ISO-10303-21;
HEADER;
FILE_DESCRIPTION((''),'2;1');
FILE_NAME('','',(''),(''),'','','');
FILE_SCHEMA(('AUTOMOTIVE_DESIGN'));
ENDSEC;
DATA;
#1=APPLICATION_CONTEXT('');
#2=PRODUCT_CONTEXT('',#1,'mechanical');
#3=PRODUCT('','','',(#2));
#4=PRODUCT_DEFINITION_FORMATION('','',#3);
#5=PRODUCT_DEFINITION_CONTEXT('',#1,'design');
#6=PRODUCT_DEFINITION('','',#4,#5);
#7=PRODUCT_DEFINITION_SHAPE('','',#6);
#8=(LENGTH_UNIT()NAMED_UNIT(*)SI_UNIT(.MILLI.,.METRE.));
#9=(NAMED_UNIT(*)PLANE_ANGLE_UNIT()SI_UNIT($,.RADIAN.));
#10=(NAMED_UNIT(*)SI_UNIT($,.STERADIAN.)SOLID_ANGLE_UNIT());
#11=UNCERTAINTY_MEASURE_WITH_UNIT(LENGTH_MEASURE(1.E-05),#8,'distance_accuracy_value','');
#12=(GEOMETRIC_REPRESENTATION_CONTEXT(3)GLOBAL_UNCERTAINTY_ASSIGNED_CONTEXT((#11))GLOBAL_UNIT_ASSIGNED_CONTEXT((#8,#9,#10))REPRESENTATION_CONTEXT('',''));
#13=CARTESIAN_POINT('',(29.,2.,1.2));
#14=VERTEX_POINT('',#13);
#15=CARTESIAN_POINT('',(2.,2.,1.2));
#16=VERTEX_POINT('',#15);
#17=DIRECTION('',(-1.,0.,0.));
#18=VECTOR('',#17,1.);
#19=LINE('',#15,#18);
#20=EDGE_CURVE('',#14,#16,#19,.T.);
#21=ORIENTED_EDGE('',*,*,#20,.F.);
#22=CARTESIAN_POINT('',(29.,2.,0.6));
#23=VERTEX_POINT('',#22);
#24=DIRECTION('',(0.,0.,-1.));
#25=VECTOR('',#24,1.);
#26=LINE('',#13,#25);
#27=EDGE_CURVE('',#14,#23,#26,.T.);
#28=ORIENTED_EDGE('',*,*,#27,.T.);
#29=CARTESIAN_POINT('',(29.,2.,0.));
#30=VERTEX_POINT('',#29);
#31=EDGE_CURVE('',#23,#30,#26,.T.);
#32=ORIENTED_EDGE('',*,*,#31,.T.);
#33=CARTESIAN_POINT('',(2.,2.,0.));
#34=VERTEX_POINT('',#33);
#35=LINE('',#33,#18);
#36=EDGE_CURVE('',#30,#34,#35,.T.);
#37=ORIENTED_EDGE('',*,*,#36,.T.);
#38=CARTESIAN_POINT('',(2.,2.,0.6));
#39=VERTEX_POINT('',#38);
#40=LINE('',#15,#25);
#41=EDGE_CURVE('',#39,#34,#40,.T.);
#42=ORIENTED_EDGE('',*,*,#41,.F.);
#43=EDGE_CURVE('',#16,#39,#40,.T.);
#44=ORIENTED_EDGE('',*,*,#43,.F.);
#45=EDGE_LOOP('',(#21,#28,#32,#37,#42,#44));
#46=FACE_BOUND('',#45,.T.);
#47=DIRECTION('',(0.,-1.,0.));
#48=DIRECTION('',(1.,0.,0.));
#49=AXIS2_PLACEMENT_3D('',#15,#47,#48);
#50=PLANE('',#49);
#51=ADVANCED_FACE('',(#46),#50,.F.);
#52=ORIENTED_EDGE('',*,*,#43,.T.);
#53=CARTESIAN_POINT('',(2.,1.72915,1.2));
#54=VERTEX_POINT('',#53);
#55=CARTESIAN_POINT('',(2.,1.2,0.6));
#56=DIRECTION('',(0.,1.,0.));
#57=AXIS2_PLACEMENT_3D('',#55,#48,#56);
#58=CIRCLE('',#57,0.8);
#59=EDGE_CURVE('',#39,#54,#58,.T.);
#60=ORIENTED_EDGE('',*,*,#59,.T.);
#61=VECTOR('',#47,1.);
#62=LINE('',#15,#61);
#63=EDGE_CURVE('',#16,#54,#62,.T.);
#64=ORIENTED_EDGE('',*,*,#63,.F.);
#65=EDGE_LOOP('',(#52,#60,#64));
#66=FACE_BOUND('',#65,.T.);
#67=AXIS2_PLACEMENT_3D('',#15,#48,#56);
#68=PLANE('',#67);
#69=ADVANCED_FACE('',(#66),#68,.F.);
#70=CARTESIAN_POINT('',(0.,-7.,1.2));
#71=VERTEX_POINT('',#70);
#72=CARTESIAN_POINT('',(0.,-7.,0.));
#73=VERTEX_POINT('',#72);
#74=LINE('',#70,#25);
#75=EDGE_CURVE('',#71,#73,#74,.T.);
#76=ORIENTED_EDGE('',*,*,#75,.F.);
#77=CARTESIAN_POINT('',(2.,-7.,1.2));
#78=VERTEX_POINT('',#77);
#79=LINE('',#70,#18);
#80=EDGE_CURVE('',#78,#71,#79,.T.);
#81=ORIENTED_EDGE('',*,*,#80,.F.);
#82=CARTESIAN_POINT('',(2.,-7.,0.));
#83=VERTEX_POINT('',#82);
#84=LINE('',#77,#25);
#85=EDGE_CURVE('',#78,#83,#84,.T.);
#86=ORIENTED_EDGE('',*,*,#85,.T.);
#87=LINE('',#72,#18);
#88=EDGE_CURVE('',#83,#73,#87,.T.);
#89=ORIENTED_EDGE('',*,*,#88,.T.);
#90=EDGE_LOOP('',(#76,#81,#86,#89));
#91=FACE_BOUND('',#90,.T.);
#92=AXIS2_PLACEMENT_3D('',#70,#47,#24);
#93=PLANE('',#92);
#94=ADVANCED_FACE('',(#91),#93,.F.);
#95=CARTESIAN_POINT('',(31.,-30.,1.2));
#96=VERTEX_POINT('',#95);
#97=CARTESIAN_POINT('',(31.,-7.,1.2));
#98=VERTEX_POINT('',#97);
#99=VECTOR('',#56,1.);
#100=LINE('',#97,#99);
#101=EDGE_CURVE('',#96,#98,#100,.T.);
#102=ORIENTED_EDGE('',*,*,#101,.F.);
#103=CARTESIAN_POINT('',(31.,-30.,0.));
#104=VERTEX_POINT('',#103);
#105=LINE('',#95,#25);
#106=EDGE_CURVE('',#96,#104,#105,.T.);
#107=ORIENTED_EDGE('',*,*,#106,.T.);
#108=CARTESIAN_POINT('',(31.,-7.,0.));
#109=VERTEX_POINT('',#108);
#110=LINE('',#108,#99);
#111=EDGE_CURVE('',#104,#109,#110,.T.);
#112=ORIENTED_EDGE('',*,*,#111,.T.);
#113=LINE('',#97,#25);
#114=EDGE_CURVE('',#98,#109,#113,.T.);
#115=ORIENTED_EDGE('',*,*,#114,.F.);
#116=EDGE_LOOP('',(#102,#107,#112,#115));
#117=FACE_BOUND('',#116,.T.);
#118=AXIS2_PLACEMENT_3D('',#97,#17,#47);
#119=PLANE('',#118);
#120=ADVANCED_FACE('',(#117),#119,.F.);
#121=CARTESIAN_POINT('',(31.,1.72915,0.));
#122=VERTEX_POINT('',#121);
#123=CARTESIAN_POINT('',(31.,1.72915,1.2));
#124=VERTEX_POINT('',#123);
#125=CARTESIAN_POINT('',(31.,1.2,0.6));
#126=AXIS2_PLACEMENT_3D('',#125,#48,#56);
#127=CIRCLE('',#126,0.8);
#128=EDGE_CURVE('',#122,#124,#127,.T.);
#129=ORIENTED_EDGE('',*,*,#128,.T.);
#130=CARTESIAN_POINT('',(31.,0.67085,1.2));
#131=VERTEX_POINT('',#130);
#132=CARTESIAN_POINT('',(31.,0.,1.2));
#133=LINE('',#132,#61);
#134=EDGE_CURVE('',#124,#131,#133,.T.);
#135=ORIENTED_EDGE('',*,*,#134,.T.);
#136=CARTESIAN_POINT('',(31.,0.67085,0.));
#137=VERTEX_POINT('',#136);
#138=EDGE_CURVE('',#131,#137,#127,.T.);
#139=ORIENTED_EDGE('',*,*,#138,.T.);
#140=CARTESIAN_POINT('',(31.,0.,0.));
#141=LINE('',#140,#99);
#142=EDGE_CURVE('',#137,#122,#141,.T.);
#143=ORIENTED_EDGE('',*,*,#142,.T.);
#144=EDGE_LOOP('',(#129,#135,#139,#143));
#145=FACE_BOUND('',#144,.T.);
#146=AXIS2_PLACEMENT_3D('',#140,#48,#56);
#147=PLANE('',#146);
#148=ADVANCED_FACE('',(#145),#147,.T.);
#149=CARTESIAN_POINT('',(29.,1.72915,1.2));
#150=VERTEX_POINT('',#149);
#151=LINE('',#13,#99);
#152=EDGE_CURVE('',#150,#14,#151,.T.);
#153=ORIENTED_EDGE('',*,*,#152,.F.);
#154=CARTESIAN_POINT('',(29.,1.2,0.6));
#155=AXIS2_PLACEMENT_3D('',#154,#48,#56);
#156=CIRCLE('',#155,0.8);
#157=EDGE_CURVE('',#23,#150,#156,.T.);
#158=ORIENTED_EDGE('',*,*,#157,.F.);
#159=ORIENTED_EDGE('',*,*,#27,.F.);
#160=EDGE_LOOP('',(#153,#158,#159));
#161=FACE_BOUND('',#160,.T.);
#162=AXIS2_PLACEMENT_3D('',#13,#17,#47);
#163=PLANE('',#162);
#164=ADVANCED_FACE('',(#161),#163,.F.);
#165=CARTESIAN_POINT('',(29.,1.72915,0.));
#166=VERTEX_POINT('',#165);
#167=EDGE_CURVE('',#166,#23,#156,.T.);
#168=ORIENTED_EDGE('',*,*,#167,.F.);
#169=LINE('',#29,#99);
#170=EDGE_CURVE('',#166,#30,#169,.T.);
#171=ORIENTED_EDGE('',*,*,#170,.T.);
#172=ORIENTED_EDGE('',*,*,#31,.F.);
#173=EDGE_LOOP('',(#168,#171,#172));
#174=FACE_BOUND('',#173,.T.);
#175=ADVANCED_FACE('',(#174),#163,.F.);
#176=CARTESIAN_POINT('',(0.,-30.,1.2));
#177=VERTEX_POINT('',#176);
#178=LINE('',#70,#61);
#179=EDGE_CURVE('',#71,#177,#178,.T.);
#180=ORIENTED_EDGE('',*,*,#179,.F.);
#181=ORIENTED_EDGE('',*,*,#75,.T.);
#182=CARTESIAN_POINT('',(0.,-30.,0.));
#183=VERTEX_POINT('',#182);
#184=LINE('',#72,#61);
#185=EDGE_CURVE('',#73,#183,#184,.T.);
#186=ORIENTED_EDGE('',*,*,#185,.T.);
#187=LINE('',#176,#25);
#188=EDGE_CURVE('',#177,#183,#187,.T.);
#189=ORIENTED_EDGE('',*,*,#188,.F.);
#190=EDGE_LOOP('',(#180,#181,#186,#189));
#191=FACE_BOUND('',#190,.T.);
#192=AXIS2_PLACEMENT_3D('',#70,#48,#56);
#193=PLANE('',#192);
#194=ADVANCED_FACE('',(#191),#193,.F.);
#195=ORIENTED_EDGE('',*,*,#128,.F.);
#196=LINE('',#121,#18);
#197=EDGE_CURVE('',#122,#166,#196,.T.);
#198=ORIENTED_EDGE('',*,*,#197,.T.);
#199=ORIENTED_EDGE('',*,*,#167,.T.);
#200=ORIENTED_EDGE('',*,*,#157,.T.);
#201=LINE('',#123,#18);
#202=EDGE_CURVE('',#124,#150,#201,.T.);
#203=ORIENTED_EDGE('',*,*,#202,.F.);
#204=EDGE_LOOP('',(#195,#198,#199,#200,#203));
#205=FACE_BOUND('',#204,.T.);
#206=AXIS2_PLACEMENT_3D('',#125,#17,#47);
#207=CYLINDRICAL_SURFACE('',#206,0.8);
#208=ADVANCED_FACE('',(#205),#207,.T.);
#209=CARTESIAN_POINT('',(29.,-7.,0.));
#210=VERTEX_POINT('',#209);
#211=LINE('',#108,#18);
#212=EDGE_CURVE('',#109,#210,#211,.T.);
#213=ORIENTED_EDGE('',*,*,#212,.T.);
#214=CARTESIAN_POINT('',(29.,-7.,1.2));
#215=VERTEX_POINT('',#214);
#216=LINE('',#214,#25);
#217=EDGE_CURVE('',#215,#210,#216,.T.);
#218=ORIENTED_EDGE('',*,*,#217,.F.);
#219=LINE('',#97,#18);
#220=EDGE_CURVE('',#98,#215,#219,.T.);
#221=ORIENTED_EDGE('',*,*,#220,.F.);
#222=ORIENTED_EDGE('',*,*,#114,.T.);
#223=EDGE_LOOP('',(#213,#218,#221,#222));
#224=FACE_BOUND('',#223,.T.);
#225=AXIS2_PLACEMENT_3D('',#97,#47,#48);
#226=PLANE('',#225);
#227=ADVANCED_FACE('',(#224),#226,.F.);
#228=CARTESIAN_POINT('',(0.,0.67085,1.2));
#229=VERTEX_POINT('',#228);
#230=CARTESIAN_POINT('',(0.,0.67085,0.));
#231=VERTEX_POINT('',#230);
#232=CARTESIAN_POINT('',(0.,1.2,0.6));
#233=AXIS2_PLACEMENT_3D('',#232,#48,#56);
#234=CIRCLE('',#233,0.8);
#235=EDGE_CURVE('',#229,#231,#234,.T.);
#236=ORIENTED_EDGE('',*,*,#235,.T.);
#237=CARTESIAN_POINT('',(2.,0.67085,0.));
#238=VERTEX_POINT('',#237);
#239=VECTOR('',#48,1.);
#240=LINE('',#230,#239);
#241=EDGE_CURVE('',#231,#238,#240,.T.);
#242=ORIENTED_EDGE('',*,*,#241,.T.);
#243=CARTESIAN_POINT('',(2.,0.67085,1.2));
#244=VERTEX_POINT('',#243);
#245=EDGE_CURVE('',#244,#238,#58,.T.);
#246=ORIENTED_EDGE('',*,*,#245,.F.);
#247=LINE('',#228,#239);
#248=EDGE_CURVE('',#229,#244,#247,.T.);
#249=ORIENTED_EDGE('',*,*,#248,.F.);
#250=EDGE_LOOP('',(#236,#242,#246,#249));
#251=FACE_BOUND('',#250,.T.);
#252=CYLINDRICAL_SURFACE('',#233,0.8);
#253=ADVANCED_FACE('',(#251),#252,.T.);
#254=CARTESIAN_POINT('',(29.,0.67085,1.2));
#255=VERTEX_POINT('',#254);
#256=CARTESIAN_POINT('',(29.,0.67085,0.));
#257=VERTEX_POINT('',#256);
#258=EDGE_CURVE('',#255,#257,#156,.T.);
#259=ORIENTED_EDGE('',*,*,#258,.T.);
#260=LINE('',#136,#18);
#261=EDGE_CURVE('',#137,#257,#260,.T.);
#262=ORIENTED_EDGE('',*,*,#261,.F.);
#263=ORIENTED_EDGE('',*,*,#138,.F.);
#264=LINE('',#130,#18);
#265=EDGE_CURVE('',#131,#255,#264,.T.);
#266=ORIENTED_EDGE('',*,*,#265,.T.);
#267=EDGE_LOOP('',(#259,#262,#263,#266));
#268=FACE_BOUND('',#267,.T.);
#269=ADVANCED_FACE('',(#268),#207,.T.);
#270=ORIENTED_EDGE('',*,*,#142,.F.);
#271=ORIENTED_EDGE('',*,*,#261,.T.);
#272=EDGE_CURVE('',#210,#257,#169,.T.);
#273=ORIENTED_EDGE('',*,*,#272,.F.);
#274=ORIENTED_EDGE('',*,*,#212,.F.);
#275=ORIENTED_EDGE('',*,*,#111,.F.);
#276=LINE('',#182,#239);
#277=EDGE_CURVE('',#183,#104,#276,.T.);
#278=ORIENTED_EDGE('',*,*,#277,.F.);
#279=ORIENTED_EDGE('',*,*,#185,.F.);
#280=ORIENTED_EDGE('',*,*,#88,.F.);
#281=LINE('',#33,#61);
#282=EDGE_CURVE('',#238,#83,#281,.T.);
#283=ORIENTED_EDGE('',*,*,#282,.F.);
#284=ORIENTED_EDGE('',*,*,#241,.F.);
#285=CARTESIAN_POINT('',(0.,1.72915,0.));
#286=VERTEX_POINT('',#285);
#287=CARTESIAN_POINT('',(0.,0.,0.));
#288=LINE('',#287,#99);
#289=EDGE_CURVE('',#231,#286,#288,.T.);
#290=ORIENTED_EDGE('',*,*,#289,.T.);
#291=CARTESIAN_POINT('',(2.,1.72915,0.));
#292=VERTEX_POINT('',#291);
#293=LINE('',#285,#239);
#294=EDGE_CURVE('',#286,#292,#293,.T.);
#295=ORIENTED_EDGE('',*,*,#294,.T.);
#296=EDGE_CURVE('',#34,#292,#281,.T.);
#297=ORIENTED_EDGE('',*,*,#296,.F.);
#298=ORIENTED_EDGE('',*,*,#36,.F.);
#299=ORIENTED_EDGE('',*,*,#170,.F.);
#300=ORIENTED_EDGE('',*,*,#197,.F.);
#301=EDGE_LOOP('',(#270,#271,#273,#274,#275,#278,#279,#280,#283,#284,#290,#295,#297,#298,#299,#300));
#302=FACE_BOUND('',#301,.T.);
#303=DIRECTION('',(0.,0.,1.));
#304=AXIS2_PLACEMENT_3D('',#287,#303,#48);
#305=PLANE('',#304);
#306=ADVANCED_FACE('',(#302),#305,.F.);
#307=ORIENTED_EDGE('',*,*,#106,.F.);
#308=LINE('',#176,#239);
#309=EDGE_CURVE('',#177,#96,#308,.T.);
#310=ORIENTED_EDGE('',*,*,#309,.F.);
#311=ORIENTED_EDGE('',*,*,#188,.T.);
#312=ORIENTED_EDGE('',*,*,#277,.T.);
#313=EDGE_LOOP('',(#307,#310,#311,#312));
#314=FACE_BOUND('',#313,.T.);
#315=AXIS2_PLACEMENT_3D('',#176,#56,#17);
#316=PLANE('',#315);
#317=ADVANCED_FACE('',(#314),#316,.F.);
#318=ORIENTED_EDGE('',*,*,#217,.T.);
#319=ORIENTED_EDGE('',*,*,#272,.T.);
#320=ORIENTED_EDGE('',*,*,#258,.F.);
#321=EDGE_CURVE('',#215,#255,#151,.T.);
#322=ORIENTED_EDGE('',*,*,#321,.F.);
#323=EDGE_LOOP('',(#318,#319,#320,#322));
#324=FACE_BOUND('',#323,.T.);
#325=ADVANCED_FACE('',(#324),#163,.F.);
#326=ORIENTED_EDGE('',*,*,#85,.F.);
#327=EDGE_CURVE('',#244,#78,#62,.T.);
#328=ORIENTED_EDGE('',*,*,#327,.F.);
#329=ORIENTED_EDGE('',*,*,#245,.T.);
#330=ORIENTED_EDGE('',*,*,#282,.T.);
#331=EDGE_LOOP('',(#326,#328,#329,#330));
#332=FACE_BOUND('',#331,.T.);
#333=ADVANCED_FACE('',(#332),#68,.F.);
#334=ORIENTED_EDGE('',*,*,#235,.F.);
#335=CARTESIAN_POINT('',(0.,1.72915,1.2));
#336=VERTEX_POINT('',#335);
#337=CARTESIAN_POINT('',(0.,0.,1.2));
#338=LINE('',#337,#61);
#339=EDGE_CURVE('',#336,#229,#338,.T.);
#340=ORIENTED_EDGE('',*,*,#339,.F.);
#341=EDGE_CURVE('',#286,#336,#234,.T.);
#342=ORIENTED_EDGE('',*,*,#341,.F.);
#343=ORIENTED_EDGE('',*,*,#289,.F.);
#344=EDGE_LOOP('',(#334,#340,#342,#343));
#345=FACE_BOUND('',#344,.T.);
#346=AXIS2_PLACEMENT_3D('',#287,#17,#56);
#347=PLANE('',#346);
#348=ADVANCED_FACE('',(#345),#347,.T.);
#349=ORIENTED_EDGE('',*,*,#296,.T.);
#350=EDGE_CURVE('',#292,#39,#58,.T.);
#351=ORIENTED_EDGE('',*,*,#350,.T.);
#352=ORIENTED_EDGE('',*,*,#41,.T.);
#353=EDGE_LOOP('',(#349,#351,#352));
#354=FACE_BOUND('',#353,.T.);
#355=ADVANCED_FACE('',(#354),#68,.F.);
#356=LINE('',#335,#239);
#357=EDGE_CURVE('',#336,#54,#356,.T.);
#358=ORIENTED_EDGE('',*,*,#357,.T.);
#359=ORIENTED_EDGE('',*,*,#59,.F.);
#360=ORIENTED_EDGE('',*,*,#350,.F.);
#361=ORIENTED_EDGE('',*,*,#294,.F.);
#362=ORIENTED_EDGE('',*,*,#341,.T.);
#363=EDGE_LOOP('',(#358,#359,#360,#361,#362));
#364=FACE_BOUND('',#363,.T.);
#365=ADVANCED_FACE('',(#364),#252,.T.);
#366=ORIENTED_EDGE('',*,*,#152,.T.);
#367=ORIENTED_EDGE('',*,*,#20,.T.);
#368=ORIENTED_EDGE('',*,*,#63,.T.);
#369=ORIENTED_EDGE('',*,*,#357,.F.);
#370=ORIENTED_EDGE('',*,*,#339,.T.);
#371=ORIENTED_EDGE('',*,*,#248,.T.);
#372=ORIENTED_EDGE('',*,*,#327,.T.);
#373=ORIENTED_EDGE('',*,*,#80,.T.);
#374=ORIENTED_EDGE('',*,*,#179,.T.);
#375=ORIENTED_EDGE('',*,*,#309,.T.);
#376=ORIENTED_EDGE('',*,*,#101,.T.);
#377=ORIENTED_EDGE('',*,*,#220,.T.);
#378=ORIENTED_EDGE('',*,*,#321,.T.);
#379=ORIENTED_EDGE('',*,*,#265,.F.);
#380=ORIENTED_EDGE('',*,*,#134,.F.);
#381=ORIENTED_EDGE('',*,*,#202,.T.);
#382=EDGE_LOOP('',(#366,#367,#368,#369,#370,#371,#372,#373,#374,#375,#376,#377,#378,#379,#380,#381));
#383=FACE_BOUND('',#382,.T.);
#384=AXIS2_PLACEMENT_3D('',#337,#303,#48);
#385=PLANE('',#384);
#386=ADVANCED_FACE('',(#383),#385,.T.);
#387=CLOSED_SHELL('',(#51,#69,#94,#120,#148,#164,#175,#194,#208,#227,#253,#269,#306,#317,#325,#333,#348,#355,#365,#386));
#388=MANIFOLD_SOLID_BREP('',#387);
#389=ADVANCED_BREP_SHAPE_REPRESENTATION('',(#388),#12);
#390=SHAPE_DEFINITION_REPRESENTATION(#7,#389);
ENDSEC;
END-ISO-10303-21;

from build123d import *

# Parameters (mm, degrees)
BOSS_EXTRUDE1_DEPTH = 1.2
BOSS_EXTRUDE3_DEPTH = 2


# Read off the part's stored shape, not the designer's step: Boss-Extrude3
with BuildPart() as part:
    # Sketch1 → Boss-Extrude1 (new body)
    with BuildSketch(Plane.XY):
        Polygon((2, 2), (29, 2), (29, -7), (31, -7), (31, -30), (0, -30), (0, -7), (2, -7), align=None)
    extrude(amount=BOSS_EXTRUDE1_DEPTH)

    # Boss-Extrude3 outline → Boss-Extrude3 (add)
    with BuildSketch(Plane(origin=(29, 0, 0), x_dir=(0, 0, -1), z_dir=(1, 0, 0))):
        with BuildLine():
            ThreePointArc((-1.2, 0.670849738), (-0.6, 0.4), (0, 0.670849738))
            Line((0, 0.670849738), (0, 1.729150262))
            ThreePointArc((0, 1.729150262), (-0.6, 2), (-1.2, 1.729150262))
            Line((-1.2, 1.729150262), (-1.2, 0.670849738))
        make_face()
    boss_extrude3 = extrude(amount=BOSS_EXTRUDE3_DEPTH)

    # Mirror1: Boss-Extrude3 across plane
    add(boss_extrude3.mirror(Plane.ZY.offset(-15.5)))


solid = part.part
